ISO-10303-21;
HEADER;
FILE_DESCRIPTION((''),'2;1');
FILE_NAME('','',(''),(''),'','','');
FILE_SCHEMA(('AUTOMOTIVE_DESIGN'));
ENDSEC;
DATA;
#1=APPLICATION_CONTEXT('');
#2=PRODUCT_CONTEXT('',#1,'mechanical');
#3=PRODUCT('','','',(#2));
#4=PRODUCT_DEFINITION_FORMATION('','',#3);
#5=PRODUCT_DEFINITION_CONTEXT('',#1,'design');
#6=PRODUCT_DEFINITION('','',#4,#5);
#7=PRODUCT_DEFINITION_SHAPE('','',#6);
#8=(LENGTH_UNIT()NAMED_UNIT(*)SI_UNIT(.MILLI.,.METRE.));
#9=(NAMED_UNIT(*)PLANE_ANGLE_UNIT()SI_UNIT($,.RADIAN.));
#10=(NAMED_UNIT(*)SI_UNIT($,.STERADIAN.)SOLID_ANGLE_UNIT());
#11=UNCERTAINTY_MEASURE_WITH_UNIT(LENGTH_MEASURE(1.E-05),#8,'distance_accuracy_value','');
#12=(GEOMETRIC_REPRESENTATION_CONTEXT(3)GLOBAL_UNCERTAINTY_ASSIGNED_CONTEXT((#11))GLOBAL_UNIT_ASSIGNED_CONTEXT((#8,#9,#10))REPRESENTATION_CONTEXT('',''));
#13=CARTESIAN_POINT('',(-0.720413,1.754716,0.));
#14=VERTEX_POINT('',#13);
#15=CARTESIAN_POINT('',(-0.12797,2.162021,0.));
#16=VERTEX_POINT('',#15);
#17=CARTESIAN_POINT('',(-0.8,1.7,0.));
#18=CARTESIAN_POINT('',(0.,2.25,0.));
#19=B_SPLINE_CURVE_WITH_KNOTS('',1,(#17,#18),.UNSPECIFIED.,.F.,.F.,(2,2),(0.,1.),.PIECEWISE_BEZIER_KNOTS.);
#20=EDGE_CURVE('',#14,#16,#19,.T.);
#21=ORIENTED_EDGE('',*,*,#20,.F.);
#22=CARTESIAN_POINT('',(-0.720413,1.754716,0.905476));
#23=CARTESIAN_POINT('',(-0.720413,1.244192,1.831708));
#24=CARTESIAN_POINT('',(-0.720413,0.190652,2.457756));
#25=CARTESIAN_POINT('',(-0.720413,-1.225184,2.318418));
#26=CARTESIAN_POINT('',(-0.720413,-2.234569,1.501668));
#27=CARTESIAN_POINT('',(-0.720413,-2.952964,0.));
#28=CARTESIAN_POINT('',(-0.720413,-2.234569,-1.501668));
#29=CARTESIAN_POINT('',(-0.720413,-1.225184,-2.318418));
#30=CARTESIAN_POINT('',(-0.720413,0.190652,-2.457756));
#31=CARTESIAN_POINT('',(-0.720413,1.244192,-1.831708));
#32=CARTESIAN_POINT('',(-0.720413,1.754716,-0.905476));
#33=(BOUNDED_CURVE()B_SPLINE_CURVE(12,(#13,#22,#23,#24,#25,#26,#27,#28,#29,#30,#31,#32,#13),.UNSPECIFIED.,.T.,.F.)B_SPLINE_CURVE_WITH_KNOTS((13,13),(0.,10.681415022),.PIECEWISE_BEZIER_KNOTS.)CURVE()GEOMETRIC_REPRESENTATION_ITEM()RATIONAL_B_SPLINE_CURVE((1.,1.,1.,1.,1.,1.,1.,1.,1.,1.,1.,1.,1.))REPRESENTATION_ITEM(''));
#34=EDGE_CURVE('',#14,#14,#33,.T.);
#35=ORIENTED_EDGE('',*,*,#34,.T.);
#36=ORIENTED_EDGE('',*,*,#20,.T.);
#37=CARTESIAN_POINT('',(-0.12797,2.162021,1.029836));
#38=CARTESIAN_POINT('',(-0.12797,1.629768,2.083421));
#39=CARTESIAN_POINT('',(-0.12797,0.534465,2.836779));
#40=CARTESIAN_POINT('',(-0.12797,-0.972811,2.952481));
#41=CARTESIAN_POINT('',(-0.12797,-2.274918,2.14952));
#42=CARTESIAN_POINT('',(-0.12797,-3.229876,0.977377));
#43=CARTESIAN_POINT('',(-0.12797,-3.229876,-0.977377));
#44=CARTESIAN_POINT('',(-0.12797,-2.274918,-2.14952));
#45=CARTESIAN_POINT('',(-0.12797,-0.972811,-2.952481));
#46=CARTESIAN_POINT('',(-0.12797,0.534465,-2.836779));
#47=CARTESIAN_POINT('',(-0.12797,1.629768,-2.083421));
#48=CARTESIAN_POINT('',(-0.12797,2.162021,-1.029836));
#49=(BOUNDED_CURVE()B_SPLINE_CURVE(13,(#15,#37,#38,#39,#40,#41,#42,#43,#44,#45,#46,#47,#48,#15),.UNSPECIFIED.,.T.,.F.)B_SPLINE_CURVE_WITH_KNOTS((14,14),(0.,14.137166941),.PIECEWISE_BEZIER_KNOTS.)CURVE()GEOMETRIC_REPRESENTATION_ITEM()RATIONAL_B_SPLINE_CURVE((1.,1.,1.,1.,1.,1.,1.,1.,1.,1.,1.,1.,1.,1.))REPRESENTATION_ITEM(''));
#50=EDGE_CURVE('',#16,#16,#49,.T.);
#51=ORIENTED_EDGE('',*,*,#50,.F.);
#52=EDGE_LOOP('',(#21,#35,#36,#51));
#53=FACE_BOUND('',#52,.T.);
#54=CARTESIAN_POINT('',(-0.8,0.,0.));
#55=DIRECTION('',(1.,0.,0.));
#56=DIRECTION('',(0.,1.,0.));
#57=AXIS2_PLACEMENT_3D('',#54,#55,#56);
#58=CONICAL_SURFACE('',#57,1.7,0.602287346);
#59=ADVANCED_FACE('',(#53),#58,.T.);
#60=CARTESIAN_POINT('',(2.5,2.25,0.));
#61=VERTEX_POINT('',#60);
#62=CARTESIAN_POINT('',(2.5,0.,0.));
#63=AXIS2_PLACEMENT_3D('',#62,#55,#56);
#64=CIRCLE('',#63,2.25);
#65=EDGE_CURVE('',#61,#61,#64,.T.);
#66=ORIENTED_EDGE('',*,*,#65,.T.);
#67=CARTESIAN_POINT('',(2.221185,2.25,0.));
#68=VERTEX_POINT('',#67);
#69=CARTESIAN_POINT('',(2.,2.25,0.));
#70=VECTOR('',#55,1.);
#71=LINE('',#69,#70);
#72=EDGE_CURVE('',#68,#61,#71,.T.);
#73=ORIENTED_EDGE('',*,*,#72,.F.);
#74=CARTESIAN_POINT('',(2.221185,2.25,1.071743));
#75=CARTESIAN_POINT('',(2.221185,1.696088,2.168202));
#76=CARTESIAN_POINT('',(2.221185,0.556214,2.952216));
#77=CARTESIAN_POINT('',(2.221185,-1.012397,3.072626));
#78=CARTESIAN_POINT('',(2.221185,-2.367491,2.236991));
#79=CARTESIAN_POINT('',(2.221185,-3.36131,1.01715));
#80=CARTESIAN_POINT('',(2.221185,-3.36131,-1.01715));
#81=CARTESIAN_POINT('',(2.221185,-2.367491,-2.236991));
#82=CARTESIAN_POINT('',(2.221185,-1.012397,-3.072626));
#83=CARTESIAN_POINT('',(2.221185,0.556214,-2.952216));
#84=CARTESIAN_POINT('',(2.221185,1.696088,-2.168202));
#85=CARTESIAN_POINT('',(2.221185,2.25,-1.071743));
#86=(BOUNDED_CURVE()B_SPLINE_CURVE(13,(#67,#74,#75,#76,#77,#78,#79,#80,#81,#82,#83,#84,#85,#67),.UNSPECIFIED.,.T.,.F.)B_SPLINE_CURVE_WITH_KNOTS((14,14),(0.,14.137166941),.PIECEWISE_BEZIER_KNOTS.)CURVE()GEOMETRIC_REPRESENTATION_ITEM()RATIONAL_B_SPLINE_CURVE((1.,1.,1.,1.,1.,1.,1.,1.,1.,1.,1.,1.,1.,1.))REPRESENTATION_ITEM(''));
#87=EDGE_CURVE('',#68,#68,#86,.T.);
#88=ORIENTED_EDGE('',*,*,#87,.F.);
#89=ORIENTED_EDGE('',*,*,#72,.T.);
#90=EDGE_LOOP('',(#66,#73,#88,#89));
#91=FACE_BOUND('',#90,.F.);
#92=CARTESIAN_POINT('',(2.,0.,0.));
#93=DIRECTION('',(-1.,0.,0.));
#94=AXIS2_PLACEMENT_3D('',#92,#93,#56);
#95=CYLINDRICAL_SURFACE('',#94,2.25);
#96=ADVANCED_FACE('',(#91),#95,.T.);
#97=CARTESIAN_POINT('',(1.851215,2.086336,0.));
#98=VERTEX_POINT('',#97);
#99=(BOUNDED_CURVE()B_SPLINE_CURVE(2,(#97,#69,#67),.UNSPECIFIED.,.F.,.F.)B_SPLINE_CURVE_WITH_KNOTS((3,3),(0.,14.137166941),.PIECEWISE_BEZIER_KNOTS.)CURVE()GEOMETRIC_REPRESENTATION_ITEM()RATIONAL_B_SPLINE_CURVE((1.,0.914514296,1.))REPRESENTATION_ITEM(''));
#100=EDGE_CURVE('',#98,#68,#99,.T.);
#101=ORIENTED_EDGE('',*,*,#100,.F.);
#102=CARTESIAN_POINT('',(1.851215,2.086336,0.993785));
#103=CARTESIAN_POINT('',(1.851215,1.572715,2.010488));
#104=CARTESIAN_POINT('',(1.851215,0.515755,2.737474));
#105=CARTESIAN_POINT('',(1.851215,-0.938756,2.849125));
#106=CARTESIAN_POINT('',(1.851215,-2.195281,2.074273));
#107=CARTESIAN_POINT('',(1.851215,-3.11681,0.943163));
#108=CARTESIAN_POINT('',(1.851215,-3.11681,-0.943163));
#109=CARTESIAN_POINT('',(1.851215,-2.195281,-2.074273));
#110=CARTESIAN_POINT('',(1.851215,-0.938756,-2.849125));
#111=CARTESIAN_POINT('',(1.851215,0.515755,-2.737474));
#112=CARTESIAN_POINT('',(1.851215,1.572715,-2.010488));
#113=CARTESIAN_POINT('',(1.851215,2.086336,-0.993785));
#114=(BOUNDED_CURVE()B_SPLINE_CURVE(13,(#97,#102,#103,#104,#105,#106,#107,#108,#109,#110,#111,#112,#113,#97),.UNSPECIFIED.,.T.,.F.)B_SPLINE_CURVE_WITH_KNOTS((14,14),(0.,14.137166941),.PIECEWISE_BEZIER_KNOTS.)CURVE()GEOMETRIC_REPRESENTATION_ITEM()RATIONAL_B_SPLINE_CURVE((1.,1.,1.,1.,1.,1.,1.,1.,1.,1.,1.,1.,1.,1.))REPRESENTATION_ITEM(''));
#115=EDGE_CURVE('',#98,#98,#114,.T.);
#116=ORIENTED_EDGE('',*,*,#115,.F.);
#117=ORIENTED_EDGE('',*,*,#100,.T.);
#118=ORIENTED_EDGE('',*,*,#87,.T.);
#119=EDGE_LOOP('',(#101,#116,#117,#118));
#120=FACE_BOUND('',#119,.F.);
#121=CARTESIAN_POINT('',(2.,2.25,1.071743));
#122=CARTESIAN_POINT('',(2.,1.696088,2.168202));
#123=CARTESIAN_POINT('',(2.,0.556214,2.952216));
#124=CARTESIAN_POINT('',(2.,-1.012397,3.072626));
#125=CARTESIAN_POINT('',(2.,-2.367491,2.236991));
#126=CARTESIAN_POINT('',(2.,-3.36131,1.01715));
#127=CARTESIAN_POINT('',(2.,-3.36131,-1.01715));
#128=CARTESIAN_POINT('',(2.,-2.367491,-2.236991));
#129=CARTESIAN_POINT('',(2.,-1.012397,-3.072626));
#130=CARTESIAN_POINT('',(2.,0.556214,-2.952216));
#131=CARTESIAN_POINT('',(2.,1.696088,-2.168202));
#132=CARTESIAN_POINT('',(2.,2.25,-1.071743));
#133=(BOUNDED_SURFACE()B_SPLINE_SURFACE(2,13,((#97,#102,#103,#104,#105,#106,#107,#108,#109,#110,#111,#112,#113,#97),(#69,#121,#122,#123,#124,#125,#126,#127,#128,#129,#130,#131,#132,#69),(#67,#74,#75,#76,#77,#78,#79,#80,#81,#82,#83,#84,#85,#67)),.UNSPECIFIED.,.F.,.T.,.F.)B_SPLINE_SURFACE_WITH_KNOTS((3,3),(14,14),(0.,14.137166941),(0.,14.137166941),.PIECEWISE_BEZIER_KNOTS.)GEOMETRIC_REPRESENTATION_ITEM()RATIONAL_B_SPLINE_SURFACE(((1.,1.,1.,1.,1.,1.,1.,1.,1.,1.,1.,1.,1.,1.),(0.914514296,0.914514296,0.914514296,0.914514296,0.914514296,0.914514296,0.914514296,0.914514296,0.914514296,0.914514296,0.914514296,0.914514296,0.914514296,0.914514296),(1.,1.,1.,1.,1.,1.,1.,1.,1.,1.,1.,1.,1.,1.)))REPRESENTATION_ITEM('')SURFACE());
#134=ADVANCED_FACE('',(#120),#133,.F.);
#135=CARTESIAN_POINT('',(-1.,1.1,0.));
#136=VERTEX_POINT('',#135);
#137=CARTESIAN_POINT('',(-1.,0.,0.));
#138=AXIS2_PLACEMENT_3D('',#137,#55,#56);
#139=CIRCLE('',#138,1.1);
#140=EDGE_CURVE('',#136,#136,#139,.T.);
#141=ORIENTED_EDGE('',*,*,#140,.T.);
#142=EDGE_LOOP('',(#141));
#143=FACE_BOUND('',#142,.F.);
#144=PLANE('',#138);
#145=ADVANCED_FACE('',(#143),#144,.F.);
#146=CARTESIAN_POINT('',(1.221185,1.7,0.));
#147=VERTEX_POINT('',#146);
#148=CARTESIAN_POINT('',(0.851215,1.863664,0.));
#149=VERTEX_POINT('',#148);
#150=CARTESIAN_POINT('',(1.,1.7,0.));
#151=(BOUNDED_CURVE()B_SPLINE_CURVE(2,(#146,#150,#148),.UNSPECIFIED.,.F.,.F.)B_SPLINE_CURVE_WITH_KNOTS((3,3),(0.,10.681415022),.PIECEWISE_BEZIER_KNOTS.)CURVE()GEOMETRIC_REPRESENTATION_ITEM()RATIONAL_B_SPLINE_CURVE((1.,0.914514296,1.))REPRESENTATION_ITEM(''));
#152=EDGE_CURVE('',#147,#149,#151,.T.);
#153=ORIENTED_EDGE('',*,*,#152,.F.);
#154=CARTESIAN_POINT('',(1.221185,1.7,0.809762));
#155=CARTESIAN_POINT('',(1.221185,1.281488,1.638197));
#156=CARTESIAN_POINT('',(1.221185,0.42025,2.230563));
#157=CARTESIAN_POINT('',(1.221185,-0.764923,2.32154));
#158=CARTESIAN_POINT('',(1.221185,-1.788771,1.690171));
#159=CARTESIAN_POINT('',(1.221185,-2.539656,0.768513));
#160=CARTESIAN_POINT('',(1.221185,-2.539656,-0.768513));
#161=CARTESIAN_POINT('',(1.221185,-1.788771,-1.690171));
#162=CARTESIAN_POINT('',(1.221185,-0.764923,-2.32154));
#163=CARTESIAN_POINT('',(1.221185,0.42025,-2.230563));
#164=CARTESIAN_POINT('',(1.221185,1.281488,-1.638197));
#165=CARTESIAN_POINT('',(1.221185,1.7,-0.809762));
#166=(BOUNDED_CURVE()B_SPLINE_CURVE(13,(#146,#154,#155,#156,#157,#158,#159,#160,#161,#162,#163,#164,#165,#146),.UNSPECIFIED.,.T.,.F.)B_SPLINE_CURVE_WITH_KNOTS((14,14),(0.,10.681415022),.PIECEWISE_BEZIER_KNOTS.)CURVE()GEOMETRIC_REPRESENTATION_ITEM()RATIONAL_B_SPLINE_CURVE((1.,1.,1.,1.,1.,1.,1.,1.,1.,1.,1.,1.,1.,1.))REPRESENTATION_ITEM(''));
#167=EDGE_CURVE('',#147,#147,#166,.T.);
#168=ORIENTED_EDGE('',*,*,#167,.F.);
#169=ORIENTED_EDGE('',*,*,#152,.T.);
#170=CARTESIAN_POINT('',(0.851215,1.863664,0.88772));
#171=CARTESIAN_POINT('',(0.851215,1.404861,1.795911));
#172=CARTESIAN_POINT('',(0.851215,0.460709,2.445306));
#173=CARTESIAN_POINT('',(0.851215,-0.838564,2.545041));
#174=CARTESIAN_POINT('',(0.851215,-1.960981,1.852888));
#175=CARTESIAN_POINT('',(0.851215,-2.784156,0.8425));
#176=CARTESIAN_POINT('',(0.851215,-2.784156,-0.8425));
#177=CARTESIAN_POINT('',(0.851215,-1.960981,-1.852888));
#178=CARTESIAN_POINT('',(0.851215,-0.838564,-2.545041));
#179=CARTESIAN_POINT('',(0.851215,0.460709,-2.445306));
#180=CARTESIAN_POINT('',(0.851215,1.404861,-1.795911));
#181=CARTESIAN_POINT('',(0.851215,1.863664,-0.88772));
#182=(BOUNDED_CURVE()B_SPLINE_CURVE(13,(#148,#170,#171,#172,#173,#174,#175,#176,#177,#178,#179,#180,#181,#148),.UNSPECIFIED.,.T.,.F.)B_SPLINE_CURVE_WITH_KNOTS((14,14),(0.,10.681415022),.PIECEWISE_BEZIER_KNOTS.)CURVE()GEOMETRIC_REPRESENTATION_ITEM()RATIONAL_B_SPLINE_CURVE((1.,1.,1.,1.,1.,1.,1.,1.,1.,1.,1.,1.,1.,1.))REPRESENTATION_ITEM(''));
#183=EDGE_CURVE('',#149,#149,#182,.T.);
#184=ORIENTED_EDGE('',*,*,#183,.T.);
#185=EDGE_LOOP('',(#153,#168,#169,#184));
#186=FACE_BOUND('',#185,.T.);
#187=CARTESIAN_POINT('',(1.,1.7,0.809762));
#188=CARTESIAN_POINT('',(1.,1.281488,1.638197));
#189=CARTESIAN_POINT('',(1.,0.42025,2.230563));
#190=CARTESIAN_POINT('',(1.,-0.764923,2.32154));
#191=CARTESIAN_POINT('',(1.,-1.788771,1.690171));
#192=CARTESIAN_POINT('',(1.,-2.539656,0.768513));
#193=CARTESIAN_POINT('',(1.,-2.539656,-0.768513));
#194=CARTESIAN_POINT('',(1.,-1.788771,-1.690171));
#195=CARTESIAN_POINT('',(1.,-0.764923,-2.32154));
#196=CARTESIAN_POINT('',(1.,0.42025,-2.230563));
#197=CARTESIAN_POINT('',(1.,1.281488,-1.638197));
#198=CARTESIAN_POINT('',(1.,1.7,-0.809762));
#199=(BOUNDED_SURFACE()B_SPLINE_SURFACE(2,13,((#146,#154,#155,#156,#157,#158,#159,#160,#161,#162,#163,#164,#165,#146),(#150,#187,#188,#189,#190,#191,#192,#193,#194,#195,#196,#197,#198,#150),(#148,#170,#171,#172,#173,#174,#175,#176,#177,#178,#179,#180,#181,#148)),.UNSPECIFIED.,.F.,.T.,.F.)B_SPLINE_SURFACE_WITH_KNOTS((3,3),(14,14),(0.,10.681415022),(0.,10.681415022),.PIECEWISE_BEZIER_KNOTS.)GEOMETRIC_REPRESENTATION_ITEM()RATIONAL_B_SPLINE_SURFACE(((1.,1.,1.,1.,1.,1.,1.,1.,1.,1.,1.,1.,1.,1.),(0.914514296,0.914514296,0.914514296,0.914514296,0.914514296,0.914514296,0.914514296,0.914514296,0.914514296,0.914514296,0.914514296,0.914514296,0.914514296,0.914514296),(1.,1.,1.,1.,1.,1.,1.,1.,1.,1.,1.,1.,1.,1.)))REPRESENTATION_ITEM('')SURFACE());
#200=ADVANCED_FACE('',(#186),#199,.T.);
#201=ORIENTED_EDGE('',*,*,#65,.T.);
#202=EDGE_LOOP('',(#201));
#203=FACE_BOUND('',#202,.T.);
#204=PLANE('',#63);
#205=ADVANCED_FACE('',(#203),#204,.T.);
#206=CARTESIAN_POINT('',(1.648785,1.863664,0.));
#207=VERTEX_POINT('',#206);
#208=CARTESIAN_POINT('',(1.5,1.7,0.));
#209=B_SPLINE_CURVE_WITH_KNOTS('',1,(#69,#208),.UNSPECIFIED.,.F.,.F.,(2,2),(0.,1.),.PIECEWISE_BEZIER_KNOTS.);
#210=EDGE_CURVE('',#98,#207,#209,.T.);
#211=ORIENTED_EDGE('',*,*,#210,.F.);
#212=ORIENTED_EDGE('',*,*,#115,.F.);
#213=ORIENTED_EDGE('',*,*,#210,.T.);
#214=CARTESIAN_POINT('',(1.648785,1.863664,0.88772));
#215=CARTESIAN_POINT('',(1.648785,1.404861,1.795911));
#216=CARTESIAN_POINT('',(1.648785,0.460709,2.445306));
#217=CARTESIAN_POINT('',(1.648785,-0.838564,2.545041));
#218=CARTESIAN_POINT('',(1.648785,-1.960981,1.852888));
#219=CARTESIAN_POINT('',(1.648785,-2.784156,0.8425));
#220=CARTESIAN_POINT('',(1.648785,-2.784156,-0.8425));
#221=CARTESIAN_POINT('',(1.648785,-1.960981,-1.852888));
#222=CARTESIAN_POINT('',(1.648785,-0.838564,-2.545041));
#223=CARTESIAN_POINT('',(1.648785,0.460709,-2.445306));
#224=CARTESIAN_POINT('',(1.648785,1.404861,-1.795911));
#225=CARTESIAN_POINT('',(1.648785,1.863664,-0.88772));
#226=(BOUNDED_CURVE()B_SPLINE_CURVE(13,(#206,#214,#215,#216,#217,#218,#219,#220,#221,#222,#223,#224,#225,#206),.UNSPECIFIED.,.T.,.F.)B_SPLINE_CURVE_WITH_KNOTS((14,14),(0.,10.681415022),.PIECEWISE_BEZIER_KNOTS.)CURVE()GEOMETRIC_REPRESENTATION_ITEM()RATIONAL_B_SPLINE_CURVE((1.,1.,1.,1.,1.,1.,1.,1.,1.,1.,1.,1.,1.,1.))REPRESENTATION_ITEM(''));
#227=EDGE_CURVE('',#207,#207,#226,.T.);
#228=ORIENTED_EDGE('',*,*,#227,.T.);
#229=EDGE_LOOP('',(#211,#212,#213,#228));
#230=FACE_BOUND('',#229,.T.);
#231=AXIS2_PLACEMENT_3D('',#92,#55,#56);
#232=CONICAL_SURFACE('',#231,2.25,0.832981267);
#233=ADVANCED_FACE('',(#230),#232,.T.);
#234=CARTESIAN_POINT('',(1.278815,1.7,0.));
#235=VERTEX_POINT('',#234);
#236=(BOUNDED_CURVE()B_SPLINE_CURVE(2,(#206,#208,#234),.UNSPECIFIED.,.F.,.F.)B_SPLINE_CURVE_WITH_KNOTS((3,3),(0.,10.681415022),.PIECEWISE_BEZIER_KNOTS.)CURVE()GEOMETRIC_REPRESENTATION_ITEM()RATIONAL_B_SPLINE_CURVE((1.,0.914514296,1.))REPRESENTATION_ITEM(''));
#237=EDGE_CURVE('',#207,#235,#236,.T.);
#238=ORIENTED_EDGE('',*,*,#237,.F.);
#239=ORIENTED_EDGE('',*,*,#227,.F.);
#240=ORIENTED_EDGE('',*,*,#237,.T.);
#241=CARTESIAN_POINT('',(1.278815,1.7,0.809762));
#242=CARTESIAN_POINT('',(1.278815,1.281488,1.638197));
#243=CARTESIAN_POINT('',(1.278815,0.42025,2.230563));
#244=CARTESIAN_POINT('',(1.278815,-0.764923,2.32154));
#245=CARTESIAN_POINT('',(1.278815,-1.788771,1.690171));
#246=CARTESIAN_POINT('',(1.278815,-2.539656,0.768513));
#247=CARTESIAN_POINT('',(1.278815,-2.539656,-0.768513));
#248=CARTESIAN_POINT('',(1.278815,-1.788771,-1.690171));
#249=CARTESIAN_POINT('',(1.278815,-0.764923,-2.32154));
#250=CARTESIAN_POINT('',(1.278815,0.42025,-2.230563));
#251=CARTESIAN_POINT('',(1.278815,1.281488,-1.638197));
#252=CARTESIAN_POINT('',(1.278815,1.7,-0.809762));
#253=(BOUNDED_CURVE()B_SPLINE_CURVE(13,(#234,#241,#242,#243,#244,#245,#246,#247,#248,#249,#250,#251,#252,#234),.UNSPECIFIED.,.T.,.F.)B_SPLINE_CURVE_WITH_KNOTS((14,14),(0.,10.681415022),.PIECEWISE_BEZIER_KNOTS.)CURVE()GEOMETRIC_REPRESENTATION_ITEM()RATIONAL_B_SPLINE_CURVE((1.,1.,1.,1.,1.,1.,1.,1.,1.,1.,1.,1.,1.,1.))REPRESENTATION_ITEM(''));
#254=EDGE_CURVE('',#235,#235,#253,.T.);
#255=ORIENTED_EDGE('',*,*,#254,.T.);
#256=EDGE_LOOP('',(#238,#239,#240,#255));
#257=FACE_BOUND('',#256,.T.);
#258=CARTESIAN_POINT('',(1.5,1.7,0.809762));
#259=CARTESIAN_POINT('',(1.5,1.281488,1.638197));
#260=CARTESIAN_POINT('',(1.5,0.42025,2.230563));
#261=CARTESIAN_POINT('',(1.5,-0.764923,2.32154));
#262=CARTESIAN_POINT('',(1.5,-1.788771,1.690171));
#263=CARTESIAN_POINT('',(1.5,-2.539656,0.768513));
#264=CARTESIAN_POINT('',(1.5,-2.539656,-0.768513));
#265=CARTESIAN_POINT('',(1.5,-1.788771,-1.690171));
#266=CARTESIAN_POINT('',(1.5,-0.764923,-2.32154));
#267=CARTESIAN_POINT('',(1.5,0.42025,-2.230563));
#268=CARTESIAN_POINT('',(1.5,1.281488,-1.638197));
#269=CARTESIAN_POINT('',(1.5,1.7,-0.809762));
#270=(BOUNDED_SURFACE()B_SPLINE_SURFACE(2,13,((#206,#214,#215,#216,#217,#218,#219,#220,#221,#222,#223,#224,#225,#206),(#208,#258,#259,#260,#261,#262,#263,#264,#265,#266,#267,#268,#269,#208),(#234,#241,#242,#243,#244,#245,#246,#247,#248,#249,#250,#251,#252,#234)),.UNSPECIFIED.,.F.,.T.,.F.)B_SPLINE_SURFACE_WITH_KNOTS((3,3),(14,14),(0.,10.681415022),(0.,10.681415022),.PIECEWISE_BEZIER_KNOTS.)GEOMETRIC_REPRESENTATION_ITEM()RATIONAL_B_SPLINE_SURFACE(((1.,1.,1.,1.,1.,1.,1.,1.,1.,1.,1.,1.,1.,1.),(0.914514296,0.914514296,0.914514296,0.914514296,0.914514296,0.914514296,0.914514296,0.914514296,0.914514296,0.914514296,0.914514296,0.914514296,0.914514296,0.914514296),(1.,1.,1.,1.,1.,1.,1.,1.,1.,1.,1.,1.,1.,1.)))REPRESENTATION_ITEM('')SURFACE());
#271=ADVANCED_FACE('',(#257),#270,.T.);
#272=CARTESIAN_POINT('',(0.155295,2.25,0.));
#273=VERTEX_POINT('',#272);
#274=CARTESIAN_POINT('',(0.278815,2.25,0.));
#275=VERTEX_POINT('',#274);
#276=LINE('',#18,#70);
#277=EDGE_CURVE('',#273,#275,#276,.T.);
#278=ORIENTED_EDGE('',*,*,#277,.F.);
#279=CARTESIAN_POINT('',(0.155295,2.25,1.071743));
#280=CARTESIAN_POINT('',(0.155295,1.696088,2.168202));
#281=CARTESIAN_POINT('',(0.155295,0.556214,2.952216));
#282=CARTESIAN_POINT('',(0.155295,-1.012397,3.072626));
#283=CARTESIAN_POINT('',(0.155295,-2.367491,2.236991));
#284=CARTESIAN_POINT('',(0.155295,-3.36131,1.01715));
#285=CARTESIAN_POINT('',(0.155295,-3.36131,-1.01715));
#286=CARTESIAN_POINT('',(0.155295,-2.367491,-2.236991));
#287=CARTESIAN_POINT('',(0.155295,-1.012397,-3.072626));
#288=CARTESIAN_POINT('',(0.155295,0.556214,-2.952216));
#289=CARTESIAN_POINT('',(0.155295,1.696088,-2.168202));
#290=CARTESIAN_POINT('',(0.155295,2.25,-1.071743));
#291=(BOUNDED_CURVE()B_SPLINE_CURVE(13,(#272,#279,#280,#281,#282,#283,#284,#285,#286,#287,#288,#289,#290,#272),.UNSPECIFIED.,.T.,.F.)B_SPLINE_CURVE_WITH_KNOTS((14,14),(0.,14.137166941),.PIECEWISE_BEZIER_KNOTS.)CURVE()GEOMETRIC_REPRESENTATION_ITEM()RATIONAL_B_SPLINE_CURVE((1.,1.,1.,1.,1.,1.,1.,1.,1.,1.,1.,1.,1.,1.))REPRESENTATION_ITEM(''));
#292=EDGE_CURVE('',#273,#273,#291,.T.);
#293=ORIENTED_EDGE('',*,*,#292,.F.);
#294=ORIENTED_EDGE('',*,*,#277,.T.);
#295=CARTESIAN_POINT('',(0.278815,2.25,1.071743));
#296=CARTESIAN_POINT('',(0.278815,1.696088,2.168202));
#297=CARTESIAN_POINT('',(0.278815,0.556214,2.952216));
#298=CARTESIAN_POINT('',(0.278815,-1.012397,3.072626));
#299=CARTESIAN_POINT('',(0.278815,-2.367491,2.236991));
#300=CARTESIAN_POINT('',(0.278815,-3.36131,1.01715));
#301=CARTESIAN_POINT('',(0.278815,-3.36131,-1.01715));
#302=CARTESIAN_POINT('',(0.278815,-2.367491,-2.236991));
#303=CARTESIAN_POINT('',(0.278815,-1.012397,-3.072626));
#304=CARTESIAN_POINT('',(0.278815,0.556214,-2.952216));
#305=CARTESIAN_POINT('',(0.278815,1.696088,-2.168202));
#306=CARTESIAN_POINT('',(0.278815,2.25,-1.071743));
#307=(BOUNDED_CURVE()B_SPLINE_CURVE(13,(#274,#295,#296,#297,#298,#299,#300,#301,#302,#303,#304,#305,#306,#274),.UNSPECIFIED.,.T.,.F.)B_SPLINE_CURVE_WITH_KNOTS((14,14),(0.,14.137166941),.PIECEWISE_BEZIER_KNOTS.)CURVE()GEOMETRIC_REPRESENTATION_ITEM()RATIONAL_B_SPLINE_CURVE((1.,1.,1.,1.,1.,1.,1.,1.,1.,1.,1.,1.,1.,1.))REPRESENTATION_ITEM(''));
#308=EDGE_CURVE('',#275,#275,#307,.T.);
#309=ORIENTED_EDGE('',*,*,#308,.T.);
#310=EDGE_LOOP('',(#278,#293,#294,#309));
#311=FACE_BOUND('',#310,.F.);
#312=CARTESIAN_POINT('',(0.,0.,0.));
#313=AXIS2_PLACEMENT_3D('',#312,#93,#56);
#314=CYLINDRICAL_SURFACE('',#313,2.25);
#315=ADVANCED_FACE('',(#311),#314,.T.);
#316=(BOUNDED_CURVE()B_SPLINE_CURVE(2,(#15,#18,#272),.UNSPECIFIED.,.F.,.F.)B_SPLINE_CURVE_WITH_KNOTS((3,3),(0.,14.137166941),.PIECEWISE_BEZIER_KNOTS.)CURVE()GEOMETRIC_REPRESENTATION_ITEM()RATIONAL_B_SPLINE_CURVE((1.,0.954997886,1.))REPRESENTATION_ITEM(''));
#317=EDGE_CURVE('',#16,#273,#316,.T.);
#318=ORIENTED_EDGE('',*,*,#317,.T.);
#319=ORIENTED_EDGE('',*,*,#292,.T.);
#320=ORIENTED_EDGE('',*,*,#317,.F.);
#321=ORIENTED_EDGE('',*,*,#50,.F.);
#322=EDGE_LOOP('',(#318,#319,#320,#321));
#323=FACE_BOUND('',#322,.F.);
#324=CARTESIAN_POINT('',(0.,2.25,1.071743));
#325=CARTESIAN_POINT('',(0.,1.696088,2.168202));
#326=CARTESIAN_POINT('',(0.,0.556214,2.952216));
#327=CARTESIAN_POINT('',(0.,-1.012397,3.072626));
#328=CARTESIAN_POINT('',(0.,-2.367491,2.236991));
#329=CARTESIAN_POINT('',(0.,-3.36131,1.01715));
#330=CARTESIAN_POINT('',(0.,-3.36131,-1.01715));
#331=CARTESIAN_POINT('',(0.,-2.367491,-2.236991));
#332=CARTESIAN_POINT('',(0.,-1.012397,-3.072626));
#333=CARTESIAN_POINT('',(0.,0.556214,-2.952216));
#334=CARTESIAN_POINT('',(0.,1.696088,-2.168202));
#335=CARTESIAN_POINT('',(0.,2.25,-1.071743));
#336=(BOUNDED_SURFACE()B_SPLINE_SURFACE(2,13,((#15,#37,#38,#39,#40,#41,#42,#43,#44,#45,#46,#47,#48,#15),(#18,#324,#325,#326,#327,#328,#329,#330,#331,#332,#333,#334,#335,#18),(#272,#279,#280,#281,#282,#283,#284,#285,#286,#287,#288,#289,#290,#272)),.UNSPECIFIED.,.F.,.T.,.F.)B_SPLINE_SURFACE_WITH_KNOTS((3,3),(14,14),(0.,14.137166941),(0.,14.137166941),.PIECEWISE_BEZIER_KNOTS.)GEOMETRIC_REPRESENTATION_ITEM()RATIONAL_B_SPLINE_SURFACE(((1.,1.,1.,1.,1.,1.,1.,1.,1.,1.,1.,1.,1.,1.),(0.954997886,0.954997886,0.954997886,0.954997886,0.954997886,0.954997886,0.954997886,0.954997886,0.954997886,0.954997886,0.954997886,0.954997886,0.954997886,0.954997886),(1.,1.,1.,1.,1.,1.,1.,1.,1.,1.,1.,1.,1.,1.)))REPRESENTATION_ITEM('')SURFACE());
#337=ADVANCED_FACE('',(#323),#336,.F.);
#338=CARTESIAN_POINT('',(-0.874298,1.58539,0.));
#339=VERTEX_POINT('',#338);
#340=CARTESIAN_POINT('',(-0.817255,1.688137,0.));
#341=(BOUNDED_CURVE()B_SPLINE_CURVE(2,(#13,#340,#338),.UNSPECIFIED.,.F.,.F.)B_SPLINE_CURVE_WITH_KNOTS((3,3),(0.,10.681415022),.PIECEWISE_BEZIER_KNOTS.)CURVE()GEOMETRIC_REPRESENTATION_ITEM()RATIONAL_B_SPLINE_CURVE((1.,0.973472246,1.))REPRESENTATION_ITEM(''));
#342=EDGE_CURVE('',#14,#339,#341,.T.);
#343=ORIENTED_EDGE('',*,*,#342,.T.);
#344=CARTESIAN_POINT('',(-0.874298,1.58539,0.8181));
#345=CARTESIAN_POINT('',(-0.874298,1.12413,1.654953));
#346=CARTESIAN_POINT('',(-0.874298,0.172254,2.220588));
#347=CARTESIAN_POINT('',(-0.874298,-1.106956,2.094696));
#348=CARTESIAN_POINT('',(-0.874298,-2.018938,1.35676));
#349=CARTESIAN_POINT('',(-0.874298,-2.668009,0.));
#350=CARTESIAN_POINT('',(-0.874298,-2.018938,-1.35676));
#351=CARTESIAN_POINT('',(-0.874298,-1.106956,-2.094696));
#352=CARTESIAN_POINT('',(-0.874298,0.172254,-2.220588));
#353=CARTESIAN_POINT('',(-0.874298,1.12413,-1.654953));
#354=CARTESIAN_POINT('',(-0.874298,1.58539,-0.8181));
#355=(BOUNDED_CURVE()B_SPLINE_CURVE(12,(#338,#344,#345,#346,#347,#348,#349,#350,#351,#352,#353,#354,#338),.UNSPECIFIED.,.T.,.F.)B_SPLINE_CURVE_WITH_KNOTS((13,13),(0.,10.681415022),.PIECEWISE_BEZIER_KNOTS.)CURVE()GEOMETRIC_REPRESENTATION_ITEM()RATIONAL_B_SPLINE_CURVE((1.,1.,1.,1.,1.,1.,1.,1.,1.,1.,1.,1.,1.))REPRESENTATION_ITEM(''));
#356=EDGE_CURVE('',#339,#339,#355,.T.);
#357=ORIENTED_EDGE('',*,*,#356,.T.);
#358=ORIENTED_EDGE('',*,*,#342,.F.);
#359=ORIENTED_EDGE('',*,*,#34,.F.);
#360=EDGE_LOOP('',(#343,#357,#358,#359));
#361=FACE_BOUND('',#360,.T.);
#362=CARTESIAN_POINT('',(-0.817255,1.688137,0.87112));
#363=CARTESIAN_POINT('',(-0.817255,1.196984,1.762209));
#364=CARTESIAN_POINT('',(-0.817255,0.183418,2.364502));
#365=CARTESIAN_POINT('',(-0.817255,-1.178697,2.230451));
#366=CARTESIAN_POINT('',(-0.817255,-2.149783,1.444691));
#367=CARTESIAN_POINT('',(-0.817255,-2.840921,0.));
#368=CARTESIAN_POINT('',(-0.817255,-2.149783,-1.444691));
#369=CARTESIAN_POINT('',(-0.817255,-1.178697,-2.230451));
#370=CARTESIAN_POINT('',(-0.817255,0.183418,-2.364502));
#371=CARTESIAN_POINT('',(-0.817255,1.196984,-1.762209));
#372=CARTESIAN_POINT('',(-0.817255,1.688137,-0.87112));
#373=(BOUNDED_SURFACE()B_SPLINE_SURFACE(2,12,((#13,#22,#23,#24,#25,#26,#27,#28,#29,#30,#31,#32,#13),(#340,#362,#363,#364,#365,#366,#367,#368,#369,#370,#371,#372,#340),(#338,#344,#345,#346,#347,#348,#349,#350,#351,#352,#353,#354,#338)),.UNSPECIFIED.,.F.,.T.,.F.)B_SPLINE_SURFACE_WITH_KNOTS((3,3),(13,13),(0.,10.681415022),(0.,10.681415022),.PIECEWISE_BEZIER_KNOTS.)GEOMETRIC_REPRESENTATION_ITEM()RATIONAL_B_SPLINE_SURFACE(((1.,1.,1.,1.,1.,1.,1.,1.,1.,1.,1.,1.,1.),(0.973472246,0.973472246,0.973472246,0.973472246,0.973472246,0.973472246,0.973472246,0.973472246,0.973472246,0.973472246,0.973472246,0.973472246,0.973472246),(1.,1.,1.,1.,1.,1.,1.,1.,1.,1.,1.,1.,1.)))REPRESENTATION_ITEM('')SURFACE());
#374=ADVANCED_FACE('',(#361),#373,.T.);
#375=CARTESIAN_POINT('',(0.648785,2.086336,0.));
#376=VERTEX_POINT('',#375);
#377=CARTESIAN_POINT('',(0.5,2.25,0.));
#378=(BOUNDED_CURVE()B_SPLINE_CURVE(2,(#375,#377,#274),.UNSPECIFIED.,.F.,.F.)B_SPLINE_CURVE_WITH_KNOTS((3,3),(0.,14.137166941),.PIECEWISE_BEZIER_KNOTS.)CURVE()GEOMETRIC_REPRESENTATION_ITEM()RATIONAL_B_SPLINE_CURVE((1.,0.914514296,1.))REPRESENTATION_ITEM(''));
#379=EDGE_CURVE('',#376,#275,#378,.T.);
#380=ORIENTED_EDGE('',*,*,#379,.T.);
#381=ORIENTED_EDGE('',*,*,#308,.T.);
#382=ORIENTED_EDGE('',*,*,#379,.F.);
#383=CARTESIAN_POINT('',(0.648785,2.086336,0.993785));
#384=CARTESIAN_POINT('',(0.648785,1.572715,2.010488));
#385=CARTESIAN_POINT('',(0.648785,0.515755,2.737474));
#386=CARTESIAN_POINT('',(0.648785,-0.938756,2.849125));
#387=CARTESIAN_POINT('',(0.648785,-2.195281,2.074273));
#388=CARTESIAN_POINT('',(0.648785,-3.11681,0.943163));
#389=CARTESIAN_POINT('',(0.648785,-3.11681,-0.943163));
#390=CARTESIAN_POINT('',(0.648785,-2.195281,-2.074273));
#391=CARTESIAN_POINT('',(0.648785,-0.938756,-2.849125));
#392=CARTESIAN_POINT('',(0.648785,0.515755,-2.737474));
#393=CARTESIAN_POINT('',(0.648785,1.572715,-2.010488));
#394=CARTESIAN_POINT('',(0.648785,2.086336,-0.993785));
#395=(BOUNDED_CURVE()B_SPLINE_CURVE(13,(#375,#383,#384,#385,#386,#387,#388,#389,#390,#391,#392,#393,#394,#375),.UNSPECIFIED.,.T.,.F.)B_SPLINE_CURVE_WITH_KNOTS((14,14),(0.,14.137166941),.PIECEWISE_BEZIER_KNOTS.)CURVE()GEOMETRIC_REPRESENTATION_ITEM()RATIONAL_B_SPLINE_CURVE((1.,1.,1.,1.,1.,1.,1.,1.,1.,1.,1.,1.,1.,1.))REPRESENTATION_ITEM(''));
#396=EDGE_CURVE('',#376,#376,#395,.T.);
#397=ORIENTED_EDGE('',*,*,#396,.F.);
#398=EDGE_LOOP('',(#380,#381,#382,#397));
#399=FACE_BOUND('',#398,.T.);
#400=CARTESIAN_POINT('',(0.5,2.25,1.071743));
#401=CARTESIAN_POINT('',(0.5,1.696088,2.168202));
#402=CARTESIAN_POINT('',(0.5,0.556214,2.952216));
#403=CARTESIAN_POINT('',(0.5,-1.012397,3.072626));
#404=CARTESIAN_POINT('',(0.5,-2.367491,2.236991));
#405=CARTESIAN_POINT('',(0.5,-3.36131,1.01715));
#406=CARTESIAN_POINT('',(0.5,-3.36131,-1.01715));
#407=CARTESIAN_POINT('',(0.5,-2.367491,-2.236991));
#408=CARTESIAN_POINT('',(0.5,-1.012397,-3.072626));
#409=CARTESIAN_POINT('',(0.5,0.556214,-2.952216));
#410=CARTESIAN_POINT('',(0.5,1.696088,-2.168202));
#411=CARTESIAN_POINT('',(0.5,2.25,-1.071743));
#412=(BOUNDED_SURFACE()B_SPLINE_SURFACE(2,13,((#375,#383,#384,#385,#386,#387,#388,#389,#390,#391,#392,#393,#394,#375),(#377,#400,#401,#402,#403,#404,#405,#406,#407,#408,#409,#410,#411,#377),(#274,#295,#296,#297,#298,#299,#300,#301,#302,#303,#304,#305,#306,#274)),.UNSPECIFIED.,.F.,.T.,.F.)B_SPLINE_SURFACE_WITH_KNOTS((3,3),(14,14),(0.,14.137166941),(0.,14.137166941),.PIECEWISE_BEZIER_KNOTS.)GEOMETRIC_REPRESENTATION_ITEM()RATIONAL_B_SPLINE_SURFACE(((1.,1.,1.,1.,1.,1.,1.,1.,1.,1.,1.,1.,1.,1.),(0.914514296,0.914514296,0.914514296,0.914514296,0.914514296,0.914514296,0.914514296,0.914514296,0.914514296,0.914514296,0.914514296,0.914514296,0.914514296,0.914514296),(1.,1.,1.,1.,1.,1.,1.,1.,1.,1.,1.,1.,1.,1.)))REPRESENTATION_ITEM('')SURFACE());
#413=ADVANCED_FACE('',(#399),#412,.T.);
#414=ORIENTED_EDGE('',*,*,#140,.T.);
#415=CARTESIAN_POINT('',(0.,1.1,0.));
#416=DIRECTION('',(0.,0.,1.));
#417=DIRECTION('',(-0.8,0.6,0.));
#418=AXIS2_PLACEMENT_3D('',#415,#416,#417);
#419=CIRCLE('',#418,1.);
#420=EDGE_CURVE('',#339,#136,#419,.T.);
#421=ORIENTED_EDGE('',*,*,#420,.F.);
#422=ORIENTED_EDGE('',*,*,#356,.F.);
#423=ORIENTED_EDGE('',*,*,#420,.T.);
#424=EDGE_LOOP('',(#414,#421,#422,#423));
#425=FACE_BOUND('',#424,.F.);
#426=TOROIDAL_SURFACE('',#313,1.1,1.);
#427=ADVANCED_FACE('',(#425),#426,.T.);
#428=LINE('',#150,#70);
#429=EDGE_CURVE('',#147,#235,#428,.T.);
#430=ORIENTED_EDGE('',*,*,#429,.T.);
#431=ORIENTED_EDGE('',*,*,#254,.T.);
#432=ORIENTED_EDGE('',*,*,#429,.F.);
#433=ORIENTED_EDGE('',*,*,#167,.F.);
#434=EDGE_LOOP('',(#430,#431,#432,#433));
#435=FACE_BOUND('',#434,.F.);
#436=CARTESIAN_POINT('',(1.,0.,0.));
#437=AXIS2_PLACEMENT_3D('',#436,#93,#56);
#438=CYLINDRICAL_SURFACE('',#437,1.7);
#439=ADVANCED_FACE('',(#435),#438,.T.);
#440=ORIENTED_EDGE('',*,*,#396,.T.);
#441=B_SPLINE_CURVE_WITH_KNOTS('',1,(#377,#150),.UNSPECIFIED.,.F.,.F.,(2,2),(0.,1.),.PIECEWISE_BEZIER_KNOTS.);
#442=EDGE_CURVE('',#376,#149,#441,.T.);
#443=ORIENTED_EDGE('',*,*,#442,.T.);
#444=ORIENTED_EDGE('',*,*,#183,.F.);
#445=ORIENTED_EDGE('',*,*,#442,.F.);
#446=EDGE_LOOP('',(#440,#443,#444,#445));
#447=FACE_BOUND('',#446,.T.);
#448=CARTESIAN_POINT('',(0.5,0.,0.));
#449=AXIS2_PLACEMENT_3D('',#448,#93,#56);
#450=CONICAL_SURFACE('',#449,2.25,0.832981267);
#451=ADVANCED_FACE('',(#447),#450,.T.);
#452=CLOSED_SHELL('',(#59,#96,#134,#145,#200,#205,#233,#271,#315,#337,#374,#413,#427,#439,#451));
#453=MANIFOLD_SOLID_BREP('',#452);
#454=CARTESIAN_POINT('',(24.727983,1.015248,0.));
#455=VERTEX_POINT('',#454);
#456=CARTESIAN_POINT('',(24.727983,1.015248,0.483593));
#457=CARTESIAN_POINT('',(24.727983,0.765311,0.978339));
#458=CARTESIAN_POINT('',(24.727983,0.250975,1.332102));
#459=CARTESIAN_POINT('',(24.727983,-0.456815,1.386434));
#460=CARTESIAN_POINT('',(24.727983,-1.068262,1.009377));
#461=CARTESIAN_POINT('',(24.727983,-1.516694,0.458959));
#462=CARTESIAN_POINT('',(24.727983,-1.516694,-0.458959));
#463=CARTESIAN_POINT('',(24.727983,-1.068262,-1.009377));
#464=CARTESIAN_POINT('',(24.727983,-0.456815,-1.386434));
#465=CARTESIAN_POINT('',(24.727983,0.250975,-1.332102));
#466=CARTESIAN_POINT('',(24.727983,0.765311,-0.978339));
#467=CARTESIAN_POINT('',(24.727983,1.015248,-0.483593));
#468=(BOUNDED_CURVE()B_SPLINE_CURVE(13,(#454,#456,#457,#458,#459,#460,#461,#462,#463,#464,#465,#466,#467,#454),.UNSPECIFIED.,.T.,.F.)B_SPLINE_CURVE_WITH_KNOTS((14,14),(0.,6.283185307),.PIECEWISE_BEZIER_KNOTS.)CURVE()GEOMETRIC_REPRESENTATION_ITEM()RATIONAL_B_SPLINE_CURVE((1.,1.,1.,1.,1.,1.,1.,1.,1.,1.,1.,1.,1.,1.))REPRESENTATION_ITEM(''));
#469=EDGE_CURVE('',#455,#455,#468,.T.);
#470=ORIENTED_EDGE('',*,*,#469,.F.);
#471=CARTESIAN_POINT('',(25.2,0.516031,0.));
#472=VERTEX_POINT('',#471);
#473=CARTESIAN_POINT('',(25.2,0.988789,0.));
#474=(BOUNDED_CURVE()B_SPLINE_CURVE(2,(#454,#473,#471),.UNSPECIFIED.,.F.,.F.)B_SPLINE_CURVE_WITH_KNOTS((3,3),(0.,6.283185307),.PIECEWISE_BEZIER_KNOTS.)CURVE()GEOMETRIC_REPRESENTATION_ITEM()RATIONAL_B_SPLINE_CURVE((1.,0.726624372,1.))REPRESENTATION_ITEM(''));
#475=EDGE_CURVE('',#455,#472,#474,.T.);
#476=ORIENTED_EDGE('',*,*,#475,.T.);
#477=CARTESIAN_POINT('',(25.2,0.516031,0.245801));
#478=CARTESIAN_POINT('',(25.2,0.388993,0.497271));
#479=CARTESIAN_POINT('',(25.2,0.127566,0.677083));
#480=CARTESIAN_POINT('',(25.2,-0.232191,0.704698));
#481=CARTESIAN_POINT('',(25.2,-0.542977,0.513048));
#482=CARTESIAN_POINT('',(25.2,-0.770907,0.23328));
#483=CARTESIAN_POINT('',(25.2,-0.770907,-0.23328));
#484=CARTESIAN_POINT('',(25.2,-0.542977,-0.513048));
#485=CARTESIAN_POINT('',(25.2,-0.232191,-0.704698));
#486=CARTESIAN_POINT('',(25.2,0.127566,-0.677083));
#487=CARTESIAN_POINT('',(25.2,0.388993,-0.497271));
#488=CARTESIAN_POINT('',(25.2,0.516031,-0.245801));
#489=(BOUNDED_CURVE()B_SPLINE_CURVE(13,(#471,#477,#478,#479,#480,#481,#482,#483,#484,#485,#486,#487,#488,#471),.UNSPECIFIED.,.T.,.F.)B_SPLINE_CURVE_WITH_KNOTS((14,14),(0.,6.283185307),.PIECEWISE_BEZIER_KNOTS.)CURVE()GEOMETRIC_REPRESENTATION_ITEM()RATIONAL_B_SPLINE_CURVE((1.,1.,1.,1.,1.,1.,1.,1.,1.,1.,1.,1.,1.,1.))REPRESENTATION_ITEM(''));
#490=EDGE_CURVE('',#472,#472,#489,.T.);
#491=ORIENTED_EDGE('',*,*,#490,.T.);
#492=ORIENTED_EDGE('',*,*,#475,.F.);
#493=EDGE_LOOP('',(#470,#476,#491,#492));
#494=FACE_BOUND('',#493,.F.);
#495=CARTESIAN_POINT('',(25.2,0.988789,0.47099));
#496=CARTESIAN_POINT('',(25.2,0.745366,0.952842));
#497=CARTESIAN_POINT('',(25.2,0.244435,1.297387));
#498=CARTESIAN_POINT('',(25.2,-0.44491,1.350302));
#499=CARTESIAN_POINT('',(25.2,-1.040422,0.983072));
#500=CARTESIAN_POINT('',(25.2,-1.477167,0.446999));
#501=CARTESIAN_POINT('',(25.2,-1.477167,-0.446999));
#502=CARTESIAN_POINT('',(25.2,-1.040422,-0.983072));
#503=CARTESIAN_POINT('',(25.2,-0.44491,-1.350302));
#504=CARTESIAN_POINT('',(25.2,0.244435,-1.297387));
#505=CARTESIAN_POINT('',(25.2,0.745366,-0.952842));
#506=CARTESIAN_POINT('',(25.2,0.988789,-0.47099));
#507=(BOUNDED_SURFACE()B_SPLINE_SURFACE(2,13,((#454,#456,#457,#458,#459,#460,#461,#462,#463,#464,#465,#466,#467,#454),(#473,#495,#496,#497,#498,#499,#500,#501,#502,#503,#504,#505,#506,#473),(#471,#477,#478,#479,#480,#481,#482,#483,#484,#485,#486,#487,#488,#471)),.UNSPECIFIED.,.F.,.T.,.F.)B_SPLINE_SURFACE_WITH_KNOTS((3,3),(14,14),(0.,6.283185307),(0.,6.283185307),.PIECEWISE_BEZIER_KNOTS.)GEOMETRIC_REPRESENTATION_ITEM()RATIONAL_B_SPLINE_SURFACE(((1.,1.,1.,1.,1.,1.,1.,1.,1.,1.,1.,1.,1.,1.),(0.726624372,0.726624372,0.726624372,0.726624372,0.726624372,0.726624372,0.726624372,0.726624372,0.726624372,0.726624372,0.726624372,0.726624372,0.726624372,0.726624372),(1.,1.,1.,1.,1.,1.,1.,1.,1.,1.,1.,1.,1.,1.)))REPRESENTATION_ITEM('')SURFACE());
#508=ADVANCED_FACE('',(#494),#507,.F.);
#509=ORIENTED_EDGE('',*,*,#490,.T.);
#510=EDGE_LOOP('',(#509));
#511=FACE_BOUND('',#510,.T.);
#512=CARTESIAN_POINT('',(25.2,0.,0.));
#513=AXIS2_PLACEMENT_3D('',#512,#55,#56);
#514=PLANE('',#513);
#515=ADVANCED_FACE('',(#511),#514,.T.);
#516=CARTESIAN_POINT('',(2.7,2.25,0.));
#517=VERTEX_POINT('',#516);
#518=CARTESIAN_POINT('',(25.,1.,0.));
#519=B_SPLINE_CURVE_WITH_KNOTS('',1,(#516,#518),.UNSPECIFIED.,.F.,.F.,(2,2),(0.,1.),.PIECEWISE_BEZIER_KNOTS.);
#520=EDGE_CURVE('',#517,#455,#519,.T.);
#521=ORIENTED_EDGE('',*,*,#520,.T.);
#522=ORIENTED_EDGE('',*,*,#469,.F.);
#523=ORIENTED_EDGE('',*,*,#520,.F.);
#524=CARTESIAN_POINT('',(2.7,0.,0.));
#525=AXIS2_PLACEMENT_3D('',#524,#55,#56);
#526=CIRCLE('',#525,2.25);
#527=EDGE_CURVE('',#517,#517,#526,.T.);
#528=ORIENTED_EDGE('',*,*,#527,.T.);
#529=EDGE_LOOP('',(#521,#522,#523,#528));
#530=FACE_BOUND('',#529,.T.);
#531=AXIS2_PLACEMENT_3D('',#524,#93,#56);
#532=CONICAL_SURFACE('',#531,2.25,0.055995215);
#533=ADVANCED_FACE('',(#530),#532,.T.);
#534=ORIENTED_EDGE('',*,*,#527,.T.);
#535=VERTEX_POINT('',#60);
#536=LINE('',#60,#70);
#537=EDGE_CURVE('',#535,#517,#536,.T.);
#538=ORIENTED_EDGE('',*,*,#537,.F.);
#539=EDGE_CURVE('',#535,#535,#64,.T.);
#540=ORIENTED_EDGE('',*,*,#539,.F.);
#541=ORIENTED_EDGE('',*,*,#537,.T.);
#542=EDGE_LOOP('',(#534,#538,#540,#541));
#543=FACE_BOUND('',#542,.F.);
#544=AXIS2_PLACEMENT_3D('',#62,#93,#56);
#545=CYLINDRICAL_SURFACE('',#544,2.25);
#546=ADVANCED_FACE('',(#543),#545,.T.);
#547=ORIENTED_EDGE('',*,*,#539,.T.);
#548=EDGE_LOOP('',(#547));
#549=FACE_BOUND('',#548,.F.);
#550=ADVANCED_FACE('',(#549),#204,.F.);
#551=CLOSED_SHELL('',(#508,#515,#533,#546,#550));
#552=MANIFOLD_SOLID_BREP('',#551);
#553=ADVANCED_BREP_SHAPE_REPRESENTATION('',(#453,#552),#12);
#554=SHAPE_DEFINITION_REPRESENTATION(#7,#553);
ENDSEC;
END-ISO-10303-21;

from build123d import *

# Parameters (mm, degrees)
F0_R       = 2.25
F1_DEPTH   = 0.5
F3_START   = 1
F2_R       = 1.7
F3_DEPTH   = 0.5
F1_FACE_R  = 2.25
F3_FACE_R  = 1.7
F6_START   = 2
F5_R       = 2.25
F6_DEPTH   = 0.5
F6_FACE_R  = 2.25
F3_FACE1_R = 1.7
F8_R       = 0.5
F10_START  = -0.8
F9_R       = 1.7
F10_DEPTH  = 0.2
F10_FACE_R = 1.7
F1_FACE1_R = 2.25
F13_R      = 0.5
F15_START  = 2.5
F14_R      = 2.25
F15_DEPTH  = 0.2
F17_START  = 25
F16_R      = 1
F17_DEPTH  = 0.2
F15_FACE_R = 2.25
F17_FACE_R = 1
F19_R      = 0.5


# Not quite as in the source:
# - a fillet or chamfer that OpenCascade refuses, or shapes differently, is made with other operations: its cross-section is extruded or revolved along the edge and cut away or added


with BuildPart() as f1:
    # F0 (on Right) → F1 (new body)
    with BuildSketch(Plane.YZ):
        Circle(F0_R)
    extrude(amount=F1_DEPTH)



with BuildPart() as f3:
    # F2 (on Right) → F3 (new body)
    with BuildSketch(Plane.YZ.offset(F3_START)):
        Circle(F2_R)
    extrude(amount=F3_DEPTH)


with BuildPart() as f1_1:
    add(f1.part)

    add(f3.part)  # F4 merges F3
    # F1_face (on face) → F4 section 0
    with BuildSketch(Plane.YZ.offset(0.5)):
        Circle(F1_FACE_R)
    # F3_face (on face) → F4 section 1
    with BuildSketch(Plane(origin=(1, 0, 0), x_dir=(0, 1, 0), z_dir=(-1, 0, 0))):
        Circle(F3_FACE_R)
    loft()



with BuildPart() as f6:
    # F5 (on Right) → F6 (new body)
    with BuildSketch(Plane.YZ.offset(F6_START)):
        Circle(F5_R)
    extrude(amount=F6_DEPTH)


with BuildPart() as f1_2:
    add(f1_1.part)

    add(f6.part)  # F7 merges F6
    # F6_face (on face) → F7 section 0
    with BuildSketch(Plane(origin=(2, 0, 0), x_dir=(0, 1, 0), z_dir=(-1, 0, 0))):
        Circle(F6_FACE_R)
    # F3_face1 (on face) → F7 section 1
    with BuildSketch(Plane.YZ.offset(1.5)):
        Circle(F3_FACE1_R)
    loft()

    # F8
    f8_edges = [f1_2.edges().sort_by_distance(p)[0] for p in [
        (0.5, -2.25, 0),
        (0.75, 1.975, 0),
        (1, -1.7, 0),
        (2, -2.25, 0),
        (1.75, 1.975, 0),
        (1.5, -1.7, 0),
    ]]
    fillet(f8_edges, radius=F8_R)



with BuildPart() as f10:
    # F9 (on Right) → F10 (new body)
    with BuildSketch(Plane.YZ.offset(F10_START)):
        Circle(F9_R)
    extrude(amount=-F10_DEPTH)


with BuildPart() as f1_3:
    add(f1_2.part)

    add(f10.part)  # F11 merges F10
    # F10_face (on face) → F11 section 0
    with BuildSketch(Plane.YZ.offset(-0.8)):
        Circle(F10_FACE_R)
    # F1_face1 (on face) → F11 section 1
    with BuildSketch(Plane(origin=(0, 0, 0), x_dir=(0, 1, 0), z_dir=(-1, 0, 0))):
        Circle(F1_FACE1_R)
    loft()

    # F12: fillet of radius 1 on 1 edges, made by hand

    # F12_s1 → F12_t2 (revolve, cut)
    with BuildSketch(Plane.XY):
        with BuildLine():
            ThreePointArc((-0.8, 1.7), (-0.9486832981, 1.416227766), (-1, 1.1))
            Line((-1, 1.1), (-1.02, 1.1))
            Line((-1.02, 1.1), (-1.02, 1.7))
            Line((-1.02, 1.7), (-1, 1.72))
            ThreePointArc((-1, 1.72), (-0.9, 1.72), (-0.816, 1.712))
            Line((-0.816, 1.712), (-0.8, 1.7))
        make_face()
    revolve(axis=Axis((-1, 0, 0), (1, 0, 0)), mode=Mode.SUBTRACT)

    # F13
    f13_edges = [f1_3.edges().sort_by_distance(p)[0] for p in [
        (-0.8, -1.7, 0),
        (-0.4, 1.975, 0),
        (0, -2.25, 0),
    ]]
    fillet(f13_edges, radius=F13_R)


with BuildPart() as f15:
    # F14 (on Right) → F15 (new body)
    with BuildSketch(Plane.YZ.offset(F15_START)):
        Circle(F14_R)
    extrude(amount=F15_DEPTH)



with BuildPart() as f17:
    # F16 (on Right) → F17 (new body)
    with BuildSketch(Plane.YZ.offset(F17_START)):
        Circle(F16_R)
    extrude(amount=F17_DEPTH)


with BuildPart() as f15_1:
    add(f15.part)

    add(f17.part)  # F18 merges F17
    # F15_face (on face) → F18 section 0
    with BuildSketch(Plane.YZ.offset(2.7)):
        Circle(F15_FACE_R)
    # F17_face (on face) → F18 section 1
    with BuildSketch(Plane(origin=(25, 0, 0), x_dir=(0, 1, 0), z_dir=(-1, 0, 0))):
        Circle(F17_FACE_R)
    loft()

    # F19
    f19_edges = [f15_1.edges().sort_by_distance(p)[0] for p in [
        (25.2, -1, 0),
    ]]
    fillet(f19_edges, radius=F19_R)


solid = Compound([f1_3.part, f15_1.part])
